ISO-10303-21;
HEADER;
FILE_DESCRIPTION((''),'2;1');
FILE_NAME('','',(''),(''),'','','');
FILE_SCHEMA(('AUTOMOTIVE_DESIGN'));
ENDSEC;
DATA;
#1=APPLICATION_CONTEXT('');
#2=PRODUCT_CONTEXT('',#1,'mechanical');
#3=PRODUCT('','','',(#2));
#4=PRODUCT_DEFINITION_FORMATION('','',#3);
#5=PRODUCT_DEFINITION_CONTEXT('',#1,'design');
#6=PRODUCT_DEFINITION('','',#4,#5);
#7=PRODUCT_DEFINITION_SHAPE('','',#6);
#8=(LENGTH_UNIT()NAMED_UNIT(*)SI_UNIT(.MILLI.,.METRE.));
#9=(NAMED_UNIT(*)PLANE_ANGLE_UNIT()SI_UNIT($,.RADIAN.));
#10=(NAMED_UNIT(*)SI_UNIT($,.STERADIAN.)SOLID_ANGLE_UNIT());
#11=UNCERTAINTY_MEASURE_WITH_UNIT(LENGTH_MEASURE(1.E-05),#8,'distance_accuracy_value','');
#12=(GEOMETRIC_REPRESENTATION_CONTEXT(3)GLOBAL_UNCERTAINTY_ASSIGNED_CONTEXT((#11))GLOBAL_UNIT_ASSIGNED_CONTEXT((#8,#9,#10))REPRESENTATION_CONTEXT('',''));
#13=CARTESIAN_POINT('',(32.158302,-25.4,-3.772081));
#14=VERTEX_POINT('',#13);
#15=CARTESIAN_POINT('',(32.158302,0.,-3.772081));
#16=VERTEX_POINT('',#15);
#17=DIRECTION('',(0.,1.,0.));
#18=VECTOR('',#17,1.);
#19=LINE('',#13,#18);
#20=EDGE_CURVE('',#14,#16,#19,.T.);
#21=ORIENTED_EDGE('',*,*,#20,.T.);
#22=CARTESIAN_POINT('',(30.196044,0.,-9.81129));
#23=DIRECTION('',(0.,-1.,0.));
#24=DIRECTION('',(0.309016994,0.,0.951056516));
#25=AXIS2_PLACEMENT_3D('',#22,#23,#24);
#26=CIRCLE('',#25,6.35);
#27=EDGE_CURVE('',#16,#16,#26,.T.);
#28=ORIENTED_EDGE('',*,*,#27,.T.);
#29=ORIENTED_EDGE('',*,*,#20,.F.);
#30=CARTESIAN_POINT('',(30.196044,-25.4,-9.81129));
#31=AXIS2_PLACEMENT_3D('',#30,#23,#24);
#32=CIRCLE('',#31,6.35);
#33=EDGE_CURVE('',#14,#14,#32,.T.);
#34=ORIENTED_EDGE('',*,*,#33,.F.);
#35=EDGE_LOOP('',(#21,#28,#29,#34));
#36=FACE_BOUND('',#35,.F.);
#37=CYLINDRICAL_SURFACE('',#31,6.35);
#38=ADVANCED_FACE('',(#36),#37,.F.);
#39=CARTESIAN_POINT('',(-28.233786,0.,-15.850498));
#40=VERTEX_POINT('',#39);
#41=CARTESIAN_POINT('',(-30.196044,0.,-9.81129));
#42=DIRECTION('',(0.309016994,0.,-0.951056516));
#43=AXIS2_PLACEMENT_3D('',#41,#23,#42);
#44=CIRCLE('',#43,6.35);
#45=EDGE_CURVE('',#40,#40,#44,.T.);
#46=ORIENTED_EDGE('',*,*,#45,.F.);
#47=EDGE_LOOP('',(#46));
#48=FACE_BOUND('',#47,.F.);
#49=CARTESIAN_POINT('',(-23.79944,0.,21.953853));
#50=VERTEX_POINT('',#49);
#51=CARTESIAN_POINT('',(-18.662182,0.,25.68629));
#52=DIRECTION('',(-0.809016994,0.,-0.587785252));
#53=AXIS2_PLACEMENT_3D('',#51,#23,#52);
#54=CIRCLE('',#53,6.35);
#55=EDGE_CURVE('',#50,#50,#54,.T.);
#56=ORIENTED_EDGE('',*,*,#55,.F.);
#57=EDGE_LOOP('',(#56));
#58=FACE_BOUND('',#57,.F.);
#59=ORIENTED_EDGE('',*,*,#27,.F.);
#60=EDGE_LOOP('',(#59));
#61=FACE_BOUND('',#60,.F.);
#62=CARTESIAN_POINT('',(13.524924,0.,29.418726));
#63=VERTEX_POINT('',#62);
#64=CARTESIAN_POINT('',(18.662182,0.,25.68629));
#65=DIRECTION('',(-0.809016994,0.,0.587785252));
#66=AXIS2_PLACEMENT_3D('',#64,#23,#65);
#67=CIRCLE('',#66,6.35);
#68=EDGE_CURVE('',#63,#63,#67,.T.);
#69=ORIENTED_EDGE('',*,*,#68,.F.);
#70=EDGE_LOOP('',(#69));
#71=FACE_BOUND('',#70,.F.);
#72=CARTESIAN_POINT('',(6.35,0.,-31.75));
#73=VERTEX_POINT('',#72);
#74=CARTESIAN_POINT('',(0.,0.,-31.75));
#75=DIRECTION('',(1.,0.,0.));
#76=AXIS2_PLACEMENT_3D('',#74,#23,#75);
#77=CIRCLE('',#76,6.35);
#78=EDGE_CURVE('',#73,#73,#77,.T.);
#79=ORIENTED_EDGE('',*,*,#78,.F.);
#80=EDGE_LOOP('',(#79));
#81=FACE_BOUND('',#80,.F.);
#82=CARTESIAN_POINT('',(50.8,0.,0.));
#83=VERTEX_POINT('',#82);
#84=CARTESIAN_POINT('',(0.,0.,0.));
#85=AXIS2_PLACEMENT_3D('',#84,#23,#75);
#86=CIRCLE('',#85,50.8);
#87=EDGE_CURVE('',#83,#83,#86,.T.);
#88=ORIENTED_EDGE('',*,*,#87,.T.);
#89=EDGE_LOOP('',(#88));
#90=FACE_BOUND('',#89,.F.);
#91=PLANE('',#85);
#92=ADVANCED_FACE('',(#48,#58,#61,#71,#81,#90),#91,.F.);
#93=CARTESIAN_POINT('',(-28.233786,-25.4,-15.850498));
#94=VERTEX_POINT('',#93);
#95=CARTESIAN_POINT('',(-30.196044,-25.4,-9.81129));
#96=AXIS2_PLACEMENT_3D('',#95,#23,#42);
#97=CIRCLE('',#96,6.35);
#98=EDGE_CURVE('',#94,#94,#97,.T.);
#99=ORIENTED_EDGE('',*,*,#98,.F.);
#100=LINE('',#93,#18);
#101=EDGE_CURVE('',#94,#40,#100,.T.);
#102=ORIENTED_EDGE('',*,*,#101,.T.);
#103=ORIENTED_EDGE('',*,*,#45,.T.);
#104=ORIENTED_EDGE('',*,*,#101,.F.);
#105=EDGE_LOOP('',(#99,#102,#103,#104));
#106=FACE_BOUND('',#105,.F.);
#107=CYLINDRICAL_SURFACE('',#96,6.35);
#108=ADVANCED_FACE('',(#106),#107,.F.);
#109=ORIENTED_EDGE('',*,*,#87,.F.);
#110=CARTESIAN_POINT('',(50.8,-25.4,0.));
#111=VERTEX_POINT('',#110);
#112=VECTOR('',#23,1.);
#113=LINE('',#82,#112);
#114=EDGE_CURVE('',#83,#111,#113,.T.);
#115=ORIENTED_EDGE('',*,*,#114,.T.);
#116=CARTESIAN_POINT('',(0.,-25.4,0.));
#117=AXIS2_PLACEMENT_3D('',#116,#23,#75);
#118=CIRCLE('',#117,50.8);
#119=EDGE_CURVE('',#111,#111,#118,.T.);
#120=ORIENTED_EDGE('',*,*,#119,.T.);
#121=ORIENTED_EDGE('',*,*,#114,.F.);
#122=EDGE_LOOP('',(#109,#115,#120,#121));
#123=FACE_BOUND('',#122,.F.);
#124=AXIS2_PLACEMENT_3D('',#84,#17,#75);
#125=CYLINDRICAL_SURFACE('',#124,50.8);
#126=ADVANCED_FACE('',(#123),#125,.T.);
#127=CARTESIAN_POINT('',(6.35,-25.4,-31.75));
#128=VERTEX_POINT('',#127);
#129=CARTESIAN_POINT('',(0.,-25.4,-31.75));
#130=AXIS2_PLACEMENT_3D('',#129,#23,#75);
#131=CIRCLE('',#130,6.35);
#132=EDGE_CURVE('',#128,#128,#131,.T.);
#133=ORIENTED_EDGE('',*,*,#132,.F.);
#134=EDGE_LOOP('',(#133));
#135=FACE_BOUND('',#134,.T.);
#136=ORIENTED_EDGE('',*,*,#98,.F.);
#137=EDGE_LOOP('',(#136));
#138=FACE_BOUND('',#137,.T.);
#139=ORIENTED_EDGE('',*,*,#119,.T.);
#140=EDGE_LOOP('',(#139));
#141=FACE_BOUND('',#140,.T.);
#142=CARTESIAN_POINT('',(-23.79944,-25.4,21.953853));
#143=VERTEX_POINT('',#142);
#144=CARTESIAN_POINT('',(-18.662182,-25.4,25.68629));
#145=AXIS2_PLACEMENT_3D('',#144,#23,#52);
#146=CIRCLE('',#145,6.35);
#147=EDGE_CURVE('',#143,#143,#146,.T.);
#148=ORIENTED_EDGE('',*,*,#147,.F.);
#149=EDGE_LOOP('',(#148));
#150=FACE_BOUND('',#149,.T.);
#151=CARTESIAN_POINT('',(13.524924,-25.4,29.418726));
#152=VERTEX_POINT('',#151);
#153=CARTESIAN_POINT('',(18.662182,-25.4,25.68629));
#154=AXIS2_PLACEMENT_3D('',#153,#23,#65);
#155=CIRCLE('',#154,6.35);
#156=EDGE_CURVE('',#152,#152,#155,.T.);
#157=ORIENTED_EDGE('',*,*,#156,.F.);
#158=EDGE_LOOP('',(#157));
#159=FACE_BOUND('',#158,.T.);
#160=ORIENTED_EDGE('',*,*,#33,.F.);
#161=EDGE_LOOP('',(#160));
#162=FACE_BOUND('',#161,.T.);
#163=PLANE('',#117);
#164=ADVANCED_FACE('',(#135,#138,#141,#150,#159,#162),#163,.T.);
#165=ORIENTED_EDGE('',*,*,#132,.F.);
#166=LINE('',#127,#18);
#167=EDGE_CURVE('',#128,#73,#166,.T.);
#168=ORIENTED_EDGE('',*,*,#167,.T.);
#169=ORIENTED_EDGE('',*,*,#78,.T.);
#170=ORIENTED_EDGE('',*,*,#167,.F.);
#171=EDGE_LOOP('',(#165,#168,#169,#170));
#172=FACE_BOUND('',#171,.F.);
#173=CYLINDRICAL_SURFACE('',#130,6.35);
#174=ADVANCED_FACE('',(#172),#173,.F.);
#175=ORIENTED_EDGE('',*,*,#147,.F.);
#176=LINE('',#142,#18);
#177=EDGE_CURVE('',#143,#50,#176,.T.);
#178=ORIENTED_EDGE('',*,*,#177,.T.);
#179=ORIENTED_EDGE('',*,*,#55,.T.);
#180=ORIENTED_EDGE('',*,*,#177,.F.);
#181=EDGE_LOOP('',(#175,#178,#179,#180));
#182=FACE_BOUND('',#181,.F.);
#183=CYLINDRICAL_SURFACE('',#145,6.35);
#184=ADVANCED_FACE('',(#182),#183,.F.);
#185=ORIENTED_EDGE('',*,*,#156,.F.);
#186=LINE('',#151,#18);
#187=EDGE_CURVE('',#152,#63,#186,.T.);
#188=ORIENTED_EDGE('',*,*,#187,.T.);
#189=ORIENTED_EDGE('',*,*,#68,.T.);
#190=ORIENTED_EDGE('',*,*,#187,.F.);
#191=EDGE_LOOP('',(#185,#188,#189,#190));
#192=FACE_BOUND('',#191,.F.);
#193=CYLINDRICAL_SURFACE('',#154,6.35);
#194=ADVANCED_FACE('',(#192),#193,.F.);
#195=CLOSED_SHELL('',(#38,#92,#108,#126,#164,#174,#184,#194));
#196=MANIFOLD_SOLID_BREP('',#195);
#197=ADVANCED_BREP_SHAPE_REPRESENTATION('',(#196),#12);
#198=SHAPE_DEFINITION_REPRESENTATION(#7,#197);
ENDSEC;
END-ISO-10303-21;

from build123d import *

# Parameters (mm, degrees)
F0_R            = 50.8
F1_DEPTH        = 25.4
F2_R            = 6.35
F3_DEPTH        = 25.4
F3_COPIES_COUNT = 5


# Not quite as in the source:
# - a pattern or mirror of a feature is missing from the dataset's text; its kind, count and spacing are read off the source's solid


with BuildPart() as f1:
    # F0 (on Front) → F1 (new body)
    with BuildSketch(Plane.XZ):
        Circle(F0_R)
    extrude(amount=F1_DEPTH)

    # F2 (on face) → F3 (cut)
    with BuildSketch(Plane.XZ.offset(25.4)):
        with Locations((0, -31.75)):
            Circle(F2_R)
    f3 = extrude(amount=-F3_DEPTH, mode=Mode.SUBTRACT)

    # F3_copies: F3 ×5 about axis
    f3_copies_axis = Axis((0, 0, 0), (0, 1, 0))
    for i in range(1, F3_COPIES_COUNT):
        add(f3.rotate(f3_copies_axis, i * 360 / F3_COPIES_COUNT), mode=Mode.SUBTRACT)


solid = f1.part
